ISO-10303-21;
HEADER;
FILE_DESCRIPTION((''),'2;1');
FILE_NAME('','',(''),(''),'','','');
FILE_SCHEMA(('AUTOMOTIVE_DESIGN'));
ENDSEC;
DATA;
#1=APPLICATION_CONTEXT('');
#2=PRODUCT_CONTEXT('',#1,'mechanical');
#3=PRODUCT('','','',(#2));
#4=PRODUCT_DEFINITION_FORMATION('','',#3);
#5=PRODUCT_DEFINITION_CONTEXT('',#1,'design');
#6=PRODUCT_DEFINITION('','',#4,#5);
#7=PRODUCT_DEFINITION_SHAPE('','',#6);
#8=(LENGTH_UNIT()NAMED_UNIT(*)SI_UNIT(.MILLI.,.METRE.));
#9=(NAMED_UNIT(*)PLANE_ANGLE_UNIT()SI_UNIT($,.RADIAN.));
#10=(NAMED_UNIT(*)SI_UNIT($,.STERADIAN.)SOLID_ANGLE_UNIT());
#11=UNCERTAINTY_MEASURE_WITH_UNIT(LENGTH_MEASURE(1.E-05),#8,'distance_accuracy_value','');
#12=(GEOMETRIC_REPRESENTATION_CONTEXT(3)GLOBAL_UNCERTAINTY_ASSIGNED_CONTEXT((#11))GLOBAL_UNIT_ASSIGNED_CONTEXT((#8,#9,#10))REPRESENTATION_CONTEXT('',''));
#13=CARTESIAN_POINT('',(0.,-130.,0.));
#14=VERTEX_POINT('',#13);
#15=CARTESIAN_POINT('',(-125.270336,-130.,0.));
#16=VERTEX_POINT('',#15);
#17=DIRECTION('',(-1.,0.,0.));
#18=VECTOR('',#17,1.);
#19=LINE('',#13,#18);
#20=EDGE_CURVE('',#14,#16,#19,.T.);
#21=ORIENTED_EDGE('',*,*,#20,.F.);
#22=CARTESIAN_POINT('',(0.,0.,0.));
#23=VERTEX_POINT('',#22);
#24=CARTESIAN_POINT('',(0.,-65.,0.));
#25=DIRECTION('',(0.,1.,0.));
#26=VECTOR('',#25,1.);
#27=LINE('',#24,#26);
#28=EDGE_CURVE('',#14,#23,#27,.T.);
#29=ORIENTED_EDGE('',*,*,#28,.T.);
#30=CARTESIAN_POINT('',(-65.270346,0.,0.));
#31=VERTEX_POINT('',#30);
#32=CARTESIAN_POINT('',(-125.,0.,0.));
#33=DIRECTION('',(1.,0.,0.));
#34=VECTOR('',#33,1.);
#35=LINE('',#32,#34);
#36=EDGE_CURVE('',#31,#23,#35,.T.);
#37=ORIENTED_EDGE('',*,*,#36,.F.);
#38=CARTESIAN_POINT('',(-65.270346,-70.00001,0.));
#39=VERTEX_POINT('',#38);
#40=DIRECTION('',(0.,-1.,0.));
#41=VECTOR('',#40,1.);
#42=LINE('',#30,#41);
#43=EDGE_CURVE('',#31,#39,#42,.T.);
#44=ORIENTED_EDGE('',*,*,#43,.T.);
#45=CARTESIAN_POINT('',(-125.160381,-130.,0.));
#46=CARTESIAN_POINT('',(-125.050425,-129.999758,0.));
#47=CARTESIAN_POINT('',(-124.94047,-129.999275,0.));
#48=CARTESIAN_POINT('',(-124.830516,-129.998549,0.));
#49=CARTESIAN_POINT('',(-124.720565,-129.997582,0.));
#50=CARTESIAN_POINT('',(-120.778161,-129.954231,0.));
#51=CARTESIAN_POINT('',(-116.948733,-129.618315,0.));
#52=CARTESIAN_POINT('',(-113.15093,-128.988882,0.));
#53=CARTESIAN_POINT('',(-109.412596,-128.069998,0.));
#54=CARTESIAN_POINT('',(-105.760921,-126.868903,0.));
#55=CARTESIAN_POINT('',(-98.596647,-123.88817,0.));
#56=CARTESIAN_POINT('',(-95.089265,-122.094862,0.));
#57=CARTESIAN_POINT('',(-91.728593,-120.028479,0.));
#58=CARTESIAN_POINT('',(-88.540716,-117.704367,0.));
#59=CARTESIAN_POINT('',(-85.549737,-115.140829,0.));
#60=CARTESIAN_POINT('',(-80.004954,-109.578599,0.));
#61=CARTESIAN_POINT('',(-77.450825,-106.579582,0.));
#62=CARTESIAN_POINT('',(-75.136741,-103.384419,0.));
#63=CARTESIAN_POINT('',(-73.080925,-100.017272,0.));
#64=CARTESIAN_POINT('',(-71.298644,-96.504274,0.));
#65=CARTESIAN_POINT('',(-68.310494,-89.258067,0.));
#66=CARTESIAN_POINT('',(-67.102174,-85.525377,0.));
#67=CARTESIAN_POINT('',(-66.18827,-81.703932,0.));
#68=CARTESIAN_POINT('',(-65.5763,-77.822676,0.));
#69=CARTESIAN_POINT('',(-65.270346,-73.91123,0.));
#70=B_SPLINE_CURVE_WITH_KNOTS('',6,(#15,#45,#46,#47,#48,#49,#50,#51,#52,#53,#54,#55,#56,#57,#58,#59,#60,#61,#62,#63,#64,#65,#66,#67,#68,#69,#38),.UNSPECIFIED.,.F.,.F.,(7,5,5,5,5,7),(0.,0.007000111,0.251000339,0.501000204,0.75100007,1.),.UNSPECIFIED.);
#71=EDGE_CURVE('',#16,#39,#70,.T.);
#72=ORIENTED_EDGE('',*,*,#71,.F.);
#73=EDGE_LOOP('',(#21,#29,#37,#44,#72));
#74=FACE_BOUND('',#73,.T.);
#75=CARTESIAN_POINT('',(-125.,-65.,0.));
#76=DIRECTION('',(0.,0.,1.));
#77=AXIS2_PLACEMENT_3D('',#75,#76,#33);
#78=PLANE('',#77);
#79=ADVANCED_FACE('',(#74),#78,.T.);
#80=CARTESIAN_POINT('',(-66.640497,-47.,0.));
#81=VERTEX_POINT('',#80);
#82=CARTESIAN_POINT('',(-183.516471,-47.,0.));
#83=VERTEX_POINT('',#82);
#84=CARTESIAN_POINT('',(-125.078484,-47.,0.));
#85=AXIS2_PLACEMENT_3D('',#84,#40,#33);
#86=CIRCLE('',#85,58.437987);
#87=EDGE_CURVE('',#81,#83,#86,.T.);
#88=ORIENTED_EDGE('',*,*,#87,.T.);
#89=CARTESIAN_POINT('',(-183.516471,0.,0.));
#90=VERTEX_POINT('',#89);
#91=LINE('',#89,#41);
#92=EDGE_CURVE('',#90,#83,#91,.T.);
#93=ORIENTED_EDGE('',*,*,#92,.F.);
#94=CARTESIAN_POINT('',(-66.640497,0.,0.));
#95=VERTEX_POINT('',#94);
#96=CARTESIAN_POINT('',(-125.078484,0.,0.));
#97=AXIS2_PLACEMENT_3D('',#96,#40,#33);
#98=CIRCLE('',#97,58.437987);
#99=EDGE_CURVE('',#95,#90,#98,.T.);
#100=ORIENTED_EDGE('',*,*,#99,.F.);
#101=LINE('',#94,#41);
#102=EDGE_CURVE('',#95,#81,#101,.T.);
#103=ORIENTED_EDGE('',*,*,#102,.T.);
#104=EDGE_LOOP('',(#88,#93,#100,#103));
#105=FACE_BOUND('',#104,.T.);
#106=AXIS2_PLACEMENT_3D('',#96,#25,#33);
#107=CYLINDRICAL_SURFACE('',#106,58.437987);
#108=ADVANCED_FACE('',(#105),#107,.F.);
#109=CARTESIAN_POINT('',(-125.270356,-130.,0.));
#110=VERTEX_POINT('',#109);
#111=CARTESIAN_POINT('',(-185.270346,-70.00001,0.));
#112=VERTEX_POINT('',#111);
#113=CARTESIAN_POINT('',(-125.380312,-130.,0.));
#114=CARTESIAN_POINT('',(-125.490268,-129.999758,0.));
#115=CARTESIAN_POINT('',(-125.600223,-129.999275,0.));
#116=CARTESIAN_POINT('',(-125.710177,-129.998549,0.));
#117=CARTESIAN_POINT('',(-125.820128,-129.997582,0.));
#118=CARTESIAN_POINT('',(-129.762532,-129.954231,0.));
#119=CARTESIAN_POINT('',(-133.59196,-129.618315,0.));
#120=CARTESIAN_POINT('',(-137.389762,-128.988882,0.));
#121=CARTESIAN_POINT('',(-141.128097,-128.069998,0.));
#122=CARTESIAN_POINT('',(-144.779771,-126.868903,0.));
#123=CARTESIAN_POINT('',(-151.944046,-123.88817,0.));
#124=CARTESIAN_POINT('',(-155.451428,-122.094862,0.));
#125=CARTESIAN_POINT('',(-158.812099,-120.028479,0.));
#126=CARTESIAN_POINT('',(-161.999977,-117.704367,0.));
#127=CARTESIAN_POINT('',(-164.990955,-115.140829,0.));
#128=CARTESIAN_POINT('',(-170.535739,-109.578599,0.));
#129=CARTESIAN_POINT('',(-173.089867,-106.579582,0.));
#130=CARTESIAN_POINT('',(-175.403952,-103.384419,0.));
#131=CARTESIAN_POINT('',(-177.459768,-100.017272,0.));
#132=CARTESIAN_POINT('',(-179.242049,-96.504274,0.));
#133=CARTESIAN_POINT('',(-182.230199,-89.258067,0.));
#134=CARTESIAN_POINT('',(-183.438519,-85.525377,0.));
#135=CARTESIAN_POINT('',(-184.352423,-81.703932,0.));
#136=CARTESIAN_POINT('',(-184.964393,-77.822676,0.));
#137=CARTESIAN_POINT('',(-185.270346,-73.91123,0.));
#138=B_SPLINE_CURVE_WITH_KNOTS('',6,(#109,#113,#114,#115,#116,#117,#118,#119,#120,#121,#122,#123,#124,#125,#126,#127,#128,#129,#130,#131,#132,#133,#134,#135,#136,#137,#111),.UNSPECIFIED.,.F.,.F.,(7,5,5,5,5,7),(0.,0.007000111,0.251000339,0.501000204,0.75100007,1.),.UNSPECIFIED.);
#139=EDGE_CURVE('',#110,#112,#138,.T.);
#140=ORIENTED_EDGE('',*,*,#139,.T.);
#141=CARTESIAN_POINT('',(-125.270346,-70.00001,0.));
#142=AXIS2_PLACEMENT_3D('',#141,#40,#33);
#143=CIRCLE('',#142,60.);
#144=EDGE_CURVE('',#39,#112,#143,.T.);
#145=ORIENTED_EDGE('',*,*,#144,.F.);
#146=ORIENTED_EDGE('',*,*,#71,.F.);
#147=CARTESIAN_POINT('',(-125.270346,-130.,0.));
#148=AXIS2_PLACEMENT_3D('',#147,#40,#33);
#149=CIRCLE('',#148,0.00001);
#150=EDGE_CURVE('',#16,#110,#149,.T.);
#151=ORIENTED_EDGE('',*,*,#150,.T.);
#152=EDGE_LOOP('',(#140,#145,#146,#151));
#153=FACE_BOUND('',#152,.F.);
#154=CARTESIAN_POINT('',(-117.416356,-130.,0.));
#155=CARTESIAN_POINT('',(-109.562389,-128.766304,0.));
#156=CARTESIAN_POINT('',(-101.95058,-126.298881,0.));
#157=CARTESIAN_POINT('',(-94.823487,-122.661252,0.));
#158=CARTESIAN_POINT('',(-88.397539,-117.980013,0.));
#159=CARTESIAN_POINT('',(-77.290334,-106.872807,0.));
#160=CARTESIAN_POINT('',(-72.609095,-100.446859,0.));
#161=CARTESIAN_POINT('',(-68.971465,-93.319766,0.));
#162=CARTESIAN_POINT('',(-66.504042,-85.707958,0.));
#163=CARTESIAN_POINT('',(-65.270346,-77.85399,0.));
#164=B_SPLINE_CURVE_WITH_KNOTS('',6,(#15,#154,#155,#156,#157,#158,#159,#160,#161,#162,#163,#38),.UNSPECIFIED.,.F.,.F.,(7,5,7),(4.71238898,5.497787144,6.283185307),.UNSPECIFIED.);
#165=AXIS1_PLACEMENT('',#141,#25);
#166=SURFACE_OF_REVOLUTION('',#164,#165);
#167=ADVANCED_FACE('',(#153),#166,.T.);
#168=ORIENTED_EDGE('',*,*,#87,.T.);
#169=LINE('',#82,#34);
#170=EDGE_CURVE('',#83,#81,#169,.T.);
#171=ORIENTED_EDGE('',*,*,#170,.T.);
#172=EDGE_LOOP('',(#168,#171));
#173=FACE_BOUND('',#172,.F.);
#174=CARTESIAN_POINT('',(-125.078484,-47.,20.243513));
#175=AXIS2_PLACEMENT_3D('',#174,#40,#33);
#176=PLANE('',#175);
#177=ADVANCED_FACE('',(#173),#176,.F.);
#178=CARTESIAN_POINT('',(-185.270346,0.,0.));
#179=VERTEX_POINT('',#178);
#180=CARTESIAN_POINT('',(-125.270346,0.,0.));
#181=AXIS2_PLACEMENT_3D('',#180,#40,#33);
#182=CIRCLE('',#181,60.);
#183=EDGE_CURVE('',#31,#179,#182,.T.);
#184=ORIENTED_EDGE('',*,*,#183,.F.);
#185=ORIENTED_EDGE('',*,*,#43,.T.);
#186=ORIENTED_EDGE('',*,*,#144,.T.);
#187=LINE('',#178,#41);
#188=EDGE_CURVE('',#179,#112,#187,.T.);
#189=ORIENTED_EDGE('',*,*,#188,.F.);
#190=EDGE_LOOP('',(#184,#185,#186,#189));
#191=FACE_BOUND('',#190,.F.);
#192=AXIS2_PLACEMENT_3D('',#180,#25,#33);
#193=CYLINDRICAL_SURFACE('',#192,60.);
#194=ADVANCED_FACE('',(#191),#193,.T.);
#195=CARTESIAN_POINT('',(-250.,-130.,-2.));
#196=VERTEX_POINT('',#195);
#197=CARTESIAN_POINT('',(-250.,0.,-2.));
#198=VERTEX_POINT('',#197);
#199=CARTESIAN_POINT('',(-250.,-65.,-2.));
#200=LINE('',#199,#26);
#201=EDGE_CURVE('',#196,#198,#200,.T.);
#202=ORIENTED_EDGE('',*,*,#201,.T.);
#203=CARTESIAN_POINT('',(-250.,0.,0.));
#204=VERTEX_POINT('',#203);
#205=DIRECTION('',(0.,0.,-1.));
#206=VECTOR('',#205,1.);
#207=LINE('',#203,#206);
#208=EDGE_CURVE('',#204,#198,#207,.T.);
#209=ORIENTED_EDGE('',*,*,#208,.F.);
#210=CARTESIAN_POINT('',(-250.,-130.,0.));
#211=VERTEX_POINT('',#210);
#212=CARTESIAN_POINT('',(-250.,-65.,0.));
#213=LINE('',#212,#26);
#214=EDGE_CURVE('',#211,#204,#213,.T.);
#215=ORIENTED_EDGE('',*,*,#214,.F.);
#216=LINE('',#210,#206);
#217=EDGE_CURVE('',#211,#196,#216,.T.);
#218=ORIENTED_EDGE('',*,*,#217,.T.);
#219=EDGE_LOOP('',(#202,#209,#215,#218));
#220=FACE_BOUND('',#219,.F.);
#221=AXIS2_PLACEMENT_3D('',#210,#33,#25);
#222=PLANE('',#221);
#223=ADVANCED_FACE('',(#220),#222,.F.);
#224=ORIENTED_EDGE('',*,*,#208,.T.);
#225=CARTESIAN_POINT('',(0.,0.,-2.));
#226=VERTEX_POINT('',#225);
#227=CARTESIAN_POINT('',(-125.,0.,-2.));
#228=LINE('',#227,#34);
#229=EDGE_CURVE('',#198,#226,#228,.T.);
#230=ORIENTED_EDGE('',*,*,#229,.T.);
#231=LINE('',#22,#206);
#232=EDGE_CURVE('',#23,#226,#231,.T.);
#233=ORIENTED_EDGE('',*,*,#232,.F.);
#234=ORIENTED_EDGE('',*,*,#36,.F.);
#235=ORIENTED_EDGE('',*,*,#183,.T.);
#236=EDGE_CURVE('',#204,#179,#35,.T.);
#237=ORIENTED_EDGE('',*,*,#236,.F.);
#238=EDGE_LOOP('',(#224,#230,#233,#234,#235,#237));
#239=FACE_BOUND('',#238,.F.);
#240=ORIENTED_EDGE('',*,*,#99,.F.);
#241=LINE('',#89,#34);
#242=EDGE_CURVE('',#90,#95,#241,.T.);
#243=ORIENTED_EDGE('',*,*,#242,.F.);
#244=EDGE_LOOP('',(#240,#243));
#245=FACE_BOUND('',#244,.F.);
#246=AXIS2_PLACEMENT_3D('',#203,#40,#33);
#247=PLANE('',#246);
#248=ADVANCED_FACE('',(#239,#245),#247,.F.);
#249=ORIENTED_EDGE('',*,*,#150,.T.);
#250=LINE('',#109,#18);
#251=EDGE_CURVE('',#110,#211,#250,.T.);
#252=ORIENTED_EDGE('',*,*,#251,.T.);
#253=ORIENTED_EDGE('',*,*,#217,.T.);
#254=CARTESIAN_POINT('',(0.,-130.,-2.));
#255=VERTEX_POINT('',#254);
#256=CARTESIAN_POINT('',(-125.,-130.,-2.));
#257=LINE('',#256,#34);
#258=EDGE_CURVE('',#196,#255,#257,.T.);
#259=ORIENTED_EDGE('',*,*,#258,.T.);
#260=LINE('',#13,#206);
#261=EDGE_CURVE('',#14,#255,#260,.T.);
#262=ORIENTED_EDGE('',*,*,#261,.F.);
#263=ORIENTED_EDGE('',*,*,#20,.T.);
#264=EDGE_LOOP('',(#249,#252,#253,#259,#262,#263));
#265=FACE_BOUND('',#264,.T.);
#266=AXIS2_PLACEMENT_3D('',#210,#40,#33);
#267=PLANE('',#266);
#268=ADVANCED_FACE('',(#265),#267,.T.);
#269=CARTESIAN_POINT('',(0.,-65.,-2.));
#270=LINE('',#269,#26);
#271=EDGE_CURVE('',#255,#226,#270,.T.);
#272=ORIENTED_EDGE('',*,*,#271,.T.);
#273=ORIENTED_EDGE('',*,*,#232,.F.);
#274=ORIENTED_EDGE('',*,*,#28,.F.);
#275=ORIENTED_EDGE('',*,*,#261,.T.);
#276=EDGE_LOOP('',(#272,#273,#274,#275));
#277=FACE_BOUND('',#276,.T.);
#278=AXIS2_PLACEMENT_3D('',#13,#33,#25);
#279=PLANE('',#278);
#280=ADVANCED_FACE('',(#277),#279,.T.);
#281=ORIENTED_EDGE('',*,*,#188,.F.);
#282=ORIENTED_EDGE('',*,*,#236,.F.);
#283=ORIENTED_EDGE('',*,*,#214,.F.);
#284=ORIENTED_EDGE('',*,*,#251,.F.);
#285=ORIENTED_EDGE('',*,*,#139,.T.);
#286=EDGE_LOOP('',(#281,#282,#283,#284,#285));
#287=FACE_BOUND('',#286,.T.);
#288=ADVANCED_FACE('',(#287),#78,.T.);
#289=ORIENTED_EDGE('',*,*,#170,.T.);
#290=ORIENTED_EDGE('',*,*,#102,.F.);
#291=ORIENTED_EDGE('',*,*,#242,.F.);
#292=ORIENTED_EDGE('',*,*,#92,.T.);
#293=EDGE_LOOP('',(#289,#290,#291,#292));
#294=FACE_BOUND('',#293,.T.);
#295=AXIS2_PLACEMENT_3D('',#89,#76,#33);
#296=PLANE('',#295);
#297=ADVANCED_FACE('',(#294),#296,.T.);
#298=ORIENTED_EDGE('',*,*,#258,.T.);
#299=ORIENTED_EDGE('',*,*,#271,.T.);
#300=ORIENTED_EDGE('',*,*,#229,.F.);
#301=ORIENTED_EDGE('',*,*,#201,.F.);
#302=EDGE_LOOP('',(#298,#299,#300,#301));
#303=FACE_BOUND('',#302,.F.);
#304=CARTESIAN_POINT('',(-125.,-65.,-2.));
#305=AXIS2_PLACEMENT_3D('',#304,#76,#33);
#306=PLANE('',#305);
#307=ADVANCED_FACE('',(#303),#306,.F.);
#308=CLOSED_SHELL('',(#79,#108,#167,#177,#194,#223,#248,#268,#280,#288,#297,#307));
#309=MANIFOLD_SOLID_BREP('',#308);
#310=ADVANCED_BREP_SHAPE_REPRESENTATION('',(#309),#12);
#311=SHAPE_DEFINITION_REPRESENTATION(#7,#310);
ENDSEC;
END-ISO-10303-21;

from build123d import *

# Parameters (mm, degrees)
F0_W     = 250
F0_H     = 130
F2_DEPTH = 2
F3_DEPTH = 130
F4_R     = 59.99999
F6_DEPTH = 47


# Not quite as in the source:
# - a fillet or chamfer is up to 0.001 mm smaller than in the source, because OpenCascade refuses the exact size


with BuildPart() as f2:
    # F0 (on Top) → F2 (new body)
    with BuildSketch(Plane.XY):
        with Locations((-125, -65)):
            Rectangle(F0_W, F0_H)
    extrude(amount=-F2_DEPTH)

    # F1 (on Front) → F3 (join)
    with BuildSketch(Plane.XZ):
        with BuildLine():
            Line((-67.4997093476, 0), (-65.2703463938, 0))
            ThreePointArc((-65.2703463938, 0), (-125.2703463938, 60), (-185.2703463938, 0))
            Line((-185.2703463938, 0), (-183.04098344, 0))
            ThreePointArc((-183.04098344, 0), (-125.2703463938, 57.7706370462), (-67.4997093476, 0))
        make_face()
        with BuildLine():
            Line((-183.04098344, 0), (-67.4997093476, 0))
            ThreePointArc((-67.4997093476, 0), (-125.2703463938, 57.7706370462), (-183.04098344, 0))
        make_face()
    extrude(amount=F3_DEPTH)

    # F4 (radius 60 in the source; OpenCascade refuses exactly that, so slightly less here)
    f4_edges = [f2.edges().sort_by_distance(p)[0] for p in [
        (-125.270346, -130, 60),
    ]]
    fillet(f4_edges, radius=F4_R)

    # F5 (on Front) → F6 (cut)
    with BuildSketch(Plane.XZ):
        with BuildLine():
            Line((-183.5164714, 0), (-66.640497432, 0))
            ThreePointArc((-66.640497432, 0), (-125.078484416, 58.437986984), (-183.5164714, 0))
        make_face()
    extrude(amount=F6_DEPTH, mode=Mode.SUBTRACT)


solid = f2.part
